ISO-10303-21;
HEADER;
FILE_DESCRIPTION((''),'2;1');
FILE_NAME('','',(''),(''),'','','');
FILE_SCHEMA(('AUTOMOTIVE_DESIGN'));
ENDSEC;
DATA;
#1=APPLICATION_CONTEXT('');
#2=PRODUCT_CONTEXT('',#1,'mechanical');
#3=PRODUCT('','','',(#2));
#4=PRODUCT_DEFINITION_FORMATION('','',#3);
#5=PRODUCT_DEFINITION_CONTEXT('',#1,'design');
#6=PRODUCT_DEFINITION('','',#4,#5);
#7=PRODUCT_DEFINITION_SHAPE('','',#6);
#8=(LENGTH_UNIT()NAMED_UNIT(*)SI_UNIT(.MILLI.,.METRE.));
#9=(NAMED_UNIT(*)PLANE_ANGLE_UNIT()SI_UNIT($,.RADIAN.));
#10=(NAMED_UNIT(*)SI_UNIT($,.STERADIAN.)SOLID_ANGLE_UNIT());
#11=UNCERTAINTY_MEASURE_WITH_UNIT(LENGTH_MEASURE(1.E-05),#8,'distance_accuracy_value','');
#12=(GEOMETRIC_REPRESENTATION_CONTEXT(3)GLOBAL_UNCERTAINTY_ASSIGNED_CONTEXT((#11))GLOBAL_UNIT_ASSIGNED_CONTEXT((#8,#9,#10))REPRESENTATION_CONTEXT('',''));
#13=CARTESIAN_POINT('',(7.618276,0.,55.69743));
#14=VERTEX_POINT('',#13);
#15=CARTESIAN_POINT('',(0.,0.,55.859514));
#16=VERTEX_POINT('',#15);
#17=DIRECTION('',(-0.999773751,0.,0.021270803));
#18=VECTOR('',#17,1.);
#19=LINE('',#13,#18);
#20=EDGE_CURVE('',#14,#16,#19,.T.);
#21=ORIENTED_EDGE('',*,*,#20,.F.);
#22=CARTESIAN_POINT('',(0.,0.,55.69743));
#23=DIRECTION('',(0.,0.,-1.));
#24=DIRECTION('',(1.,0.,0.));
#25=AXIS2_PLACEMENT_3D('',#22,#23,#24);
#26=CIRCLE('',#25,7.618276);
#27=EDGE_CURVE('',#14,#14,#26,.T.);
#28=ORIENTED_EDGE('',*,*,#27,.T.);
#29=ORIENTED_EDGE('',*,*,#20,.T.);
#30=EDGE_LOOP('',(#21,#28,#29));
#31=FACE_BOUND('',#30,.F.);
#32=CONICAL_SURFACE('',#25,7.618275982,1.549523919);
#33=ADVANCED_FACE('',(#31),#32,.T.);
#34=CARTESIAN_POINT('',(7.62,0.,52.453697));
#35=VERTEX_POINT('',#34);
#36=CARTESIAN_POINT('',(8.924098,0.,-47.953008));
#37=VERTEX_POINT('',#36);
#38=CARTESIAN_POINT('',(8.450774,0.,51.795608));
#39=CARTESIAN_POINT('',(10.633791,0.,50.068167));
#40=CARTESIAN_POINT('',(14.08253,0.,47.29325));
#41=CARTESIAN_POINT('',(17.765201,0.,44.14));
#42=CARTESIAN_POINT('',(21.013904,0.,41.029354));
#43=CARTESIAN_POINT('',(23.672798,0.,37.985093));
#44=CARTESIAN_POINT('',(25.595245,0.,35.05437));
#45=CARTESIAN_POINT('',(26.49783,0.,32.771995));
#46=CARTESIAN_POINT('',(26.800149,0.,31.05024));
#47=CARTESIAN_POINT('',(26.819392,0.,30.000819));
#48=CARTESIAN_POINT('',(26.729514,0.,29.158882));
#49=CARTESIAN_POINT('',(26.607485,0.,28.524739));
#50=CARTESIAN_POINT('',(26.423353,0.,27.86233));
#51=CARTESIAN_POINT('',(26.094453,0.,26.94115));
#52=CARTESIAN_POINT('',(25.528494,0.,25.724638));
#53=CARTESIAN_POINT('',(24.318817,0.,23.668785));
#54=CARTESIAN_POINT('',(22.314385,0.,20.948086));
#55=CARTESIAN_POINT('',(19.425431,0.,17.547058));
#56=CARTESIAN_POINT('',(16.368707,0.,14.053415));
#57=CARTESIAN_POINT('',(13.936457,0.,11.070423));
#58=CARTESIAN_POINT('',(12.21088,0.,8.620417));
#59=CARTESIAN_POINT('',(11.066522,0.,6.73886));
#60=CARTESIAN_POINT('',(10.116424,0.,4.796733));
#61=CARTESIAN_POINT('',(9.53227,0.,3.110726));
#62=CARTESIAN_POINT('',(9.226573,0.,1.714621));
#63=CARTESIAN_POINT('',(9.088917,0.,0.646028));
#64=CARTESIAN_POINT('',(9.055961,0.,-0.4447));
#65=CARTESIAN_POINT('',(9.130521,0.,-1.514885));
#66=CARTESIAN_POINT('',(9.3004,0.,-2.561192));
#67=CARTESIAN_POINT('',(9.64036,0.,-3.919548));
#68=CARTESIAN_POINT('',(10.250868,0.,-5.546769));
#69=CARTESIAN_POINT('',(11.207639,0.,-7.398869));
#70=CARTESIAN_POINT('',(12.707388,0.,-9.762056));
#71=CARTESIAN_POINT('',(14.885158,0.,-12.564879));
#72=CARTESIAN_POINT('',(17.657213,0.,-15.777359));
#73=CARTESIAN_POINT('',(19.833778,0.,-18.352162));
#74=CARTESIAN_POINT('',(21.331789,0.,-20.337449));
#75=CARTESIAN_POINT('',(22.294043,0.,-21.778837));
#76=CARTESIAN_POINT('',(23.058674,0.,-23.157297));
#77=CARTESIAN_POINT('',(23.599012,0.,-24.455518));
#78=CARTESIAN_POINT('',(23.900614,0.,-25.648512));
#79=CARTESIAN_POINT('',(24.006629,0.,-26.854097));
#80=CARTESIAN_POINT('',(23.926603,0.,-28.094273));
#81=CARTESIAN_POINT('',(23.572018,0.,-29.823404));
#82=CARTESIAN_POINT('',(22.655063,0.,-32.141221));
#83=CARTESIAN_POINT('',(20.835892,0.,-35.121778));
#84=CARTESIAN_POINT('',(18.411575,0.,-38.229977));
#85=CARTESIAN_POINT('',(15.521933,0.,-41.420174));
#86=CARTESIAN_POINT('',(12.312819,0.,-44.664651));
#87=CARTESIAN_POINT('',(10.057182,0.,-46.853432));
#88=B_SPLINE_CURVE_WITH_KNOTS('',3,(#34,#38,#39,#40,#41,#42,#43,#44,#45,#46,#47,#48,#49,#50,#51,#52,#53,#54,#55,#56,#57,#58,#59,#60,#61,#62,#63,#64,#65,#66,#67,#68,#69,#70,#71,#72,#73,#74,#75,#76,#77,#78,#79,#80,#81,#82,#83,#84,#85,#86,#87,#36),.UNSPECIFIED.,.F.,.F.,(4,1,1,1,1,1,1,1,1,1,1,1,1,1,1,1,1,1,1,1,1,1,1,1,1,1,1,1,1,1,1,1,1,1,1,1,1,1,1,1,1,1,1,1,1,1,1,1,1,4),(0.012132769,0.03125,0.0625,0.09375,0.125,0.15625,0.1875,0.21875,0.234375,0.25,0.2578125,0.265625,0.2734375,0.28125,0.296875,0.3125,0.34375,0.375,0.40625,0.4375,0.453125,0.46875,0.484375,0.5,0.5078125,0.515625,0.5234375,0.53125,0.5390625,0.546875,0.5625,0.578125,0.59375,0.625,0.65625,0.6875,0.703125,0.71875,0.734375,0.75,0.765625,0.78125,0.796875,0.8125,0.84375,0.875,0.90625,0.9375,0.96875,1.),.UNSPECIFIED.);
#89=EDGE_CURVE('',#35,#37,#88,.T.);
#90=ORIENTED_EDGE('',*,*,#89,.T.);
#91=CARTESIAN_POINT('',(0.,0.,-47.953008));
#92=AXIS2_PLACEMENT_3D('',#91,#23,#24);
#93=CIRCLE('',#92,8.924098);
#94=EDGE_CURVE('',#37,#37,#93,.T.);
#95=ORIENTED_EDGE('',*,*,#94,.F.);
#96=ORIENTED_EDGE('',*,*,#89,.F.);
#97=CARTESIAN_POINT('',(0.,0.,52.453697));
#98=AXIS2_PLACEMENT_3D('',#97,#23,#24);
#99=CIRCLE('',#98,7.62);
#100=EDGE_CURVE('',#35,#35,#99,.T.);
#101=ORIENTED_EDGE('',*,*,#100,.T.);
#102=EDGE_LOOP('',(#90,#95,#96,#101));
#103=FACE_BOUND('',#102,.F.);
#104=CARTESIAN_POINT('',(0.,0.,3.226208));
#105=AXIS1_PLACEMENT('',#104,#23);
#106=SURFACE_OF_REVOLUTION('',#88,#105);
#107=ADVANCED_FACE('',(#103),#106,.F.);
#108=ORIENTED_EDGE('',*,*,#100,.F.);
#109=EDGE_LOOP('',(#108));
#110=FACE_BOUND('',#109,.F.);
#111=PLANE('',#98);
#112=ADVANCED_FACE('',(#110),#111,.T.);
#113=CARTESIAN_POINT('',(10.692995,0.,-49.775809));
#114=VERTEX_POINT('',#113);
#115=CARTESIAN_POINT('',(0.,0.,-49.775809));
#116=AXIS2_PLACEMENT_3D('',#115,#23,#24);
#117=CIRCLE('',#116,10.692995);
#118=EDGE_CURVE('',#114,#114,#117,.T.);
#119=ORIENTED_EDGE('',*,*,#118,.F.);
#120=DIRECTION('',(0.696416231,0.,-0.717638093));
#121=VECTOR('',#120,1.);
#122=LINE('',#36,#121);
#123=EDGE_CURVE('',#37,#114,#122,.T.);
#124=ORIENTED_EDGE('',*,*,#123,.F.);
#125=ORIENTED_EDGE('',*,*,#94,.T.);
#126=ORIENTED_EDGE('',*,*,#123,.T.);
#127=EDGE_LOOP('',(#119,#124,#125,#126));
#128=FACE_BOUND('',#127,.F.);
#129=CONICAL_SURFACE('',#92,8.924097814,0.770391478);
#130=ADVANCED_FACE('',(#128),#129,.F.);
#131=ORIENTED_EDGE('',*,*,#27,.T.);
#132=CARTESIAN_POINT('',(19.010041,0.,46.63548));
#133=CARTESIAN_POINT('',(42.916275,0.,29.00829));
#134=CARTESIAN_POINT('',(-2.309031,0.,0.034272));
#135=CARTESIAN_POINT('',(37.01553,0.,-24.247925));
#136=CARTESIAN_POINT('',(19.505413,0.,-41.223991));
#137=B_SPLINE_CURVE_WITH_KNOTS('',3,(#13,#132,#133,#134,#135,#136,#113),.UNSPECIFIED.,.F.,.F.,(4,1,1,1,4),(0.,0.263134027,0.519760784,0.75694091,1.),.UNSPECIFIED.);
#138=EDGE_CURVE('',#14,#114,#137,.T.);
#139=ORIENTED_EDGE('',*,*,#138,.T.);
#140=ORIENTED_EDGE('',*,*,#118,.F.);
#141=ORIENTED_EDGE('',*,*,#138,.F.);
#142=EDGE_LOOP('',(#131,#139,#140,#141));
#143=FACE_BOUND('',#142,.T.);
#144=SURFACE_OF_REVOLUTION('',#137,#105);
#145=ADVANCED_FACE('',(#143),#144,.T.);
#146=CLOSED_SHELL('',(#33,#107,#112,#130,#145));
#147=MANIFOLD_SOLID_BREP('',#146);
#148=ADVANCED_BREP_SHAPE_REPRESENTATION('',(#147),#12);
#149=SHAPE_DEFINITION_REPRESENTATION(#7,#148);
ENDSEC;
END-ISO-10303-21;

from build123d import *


# Not quite as in the source:
# - ends of sketch curves that miss each other by under 0.0002 mm in the source are joined
# - the dataset's text gives a spline's control points without its knots; the knots are read off the source's solid


with BuildPart() as f1:
    # F0 (on Front) → F1 (revolve)
    with BuildSketch(Plane.XZ):
        with BuildLine():
            Line((7.6182759816, 55.6974300589), (0, 55.8595135808))
            Line((0, 55.8595135808), (0, 52.4536972299))
            Line((0, 52.4536972299), (7.62, 52.4536972299))
            add(Edge.make_bspline(
                [(7.62, 52.4536972299), (8.4507741087, 51.7956075294), (10.6337911661, 50.0681673134), (14.0825299324, 47.2932496396), (17.7652011986, 44.139999809), (21.0139039479, 41.0293537983), (23.6727982156, 37.9850926484), (25.5952452636, 35.0543698089), (26.4978301822, 32.7719949731), (26.8001488213, 31.0502395533), (26.8193923693, 30.0008185238), (26.7295144932, 29.1588823674), (26.6074846335, 28.5247393458), (26.4233534744, 27.862329589), (26.0944531371, 26.9411497618), (25.528493763, 25.7246379164), (24.3188174109, 23.6687849146), (22.3143846414, 20.9480860054), (19.4254308568, 17.5470578663), (16.3687065974, 14.053414736), (13.9364574975, 11.0704228027), (12.2108797946, 8.6204173077), (11.0665218373, 6.7388599172), (10.1164243847, 4.7967330249), (9.5322697793, 3.1107263225), (9.2265726183, 1.714621277), (9.0889169388, 0.6460277237), (9.0559612523, -0.4446998408), (9.1305212863, -1.5148849791), (9.3003995532, -2.5611915369), (9.6403598774, -3.9195478282), (10.2508680098, -5.5467690428), (11.2076392915, -7.3988694604), (12.7073875743, -9.7620555753), (14.8851581339, -12.5648794621), (17.6572125501, -15.7773591275), (19.8337778082, -18.3521615832), (21.3317892611, -20.3374489686), (22.2940430686, -21.7788365909), (23.0586742875, -23.1572969124), (23.5990124042, -24.4555180702), (23.9006142985, -25.648512193), (24.0066287573, -26.8540972979), (23.9266033282, -28.0942726556), (23.5720177325, -29.8234035474), (22.655062987, -32.1412209964), (20.8358920917, -35.1217784732), (18.4115749368, -38.229977045), (15.5219332262, -41.4201740782), (12.312819371, -44.6646511445), (10.05718155, -46.8534319006), (8.9240978136, -47.9530082934)],
                knots=[0.0121327687, 0.0121327687, 0.0121327687, 0.0121327687, 0.03125, 0.0625, 0.09375, 0.125, 0.15625, 0.1875, 0.21875, 0.234375, 0.25, 0.2578125, 0.265625, 0.2734375, 0.28125, 0.296875, 0.3125, 0.34375, 0.375, 0.40625, 0.4375, 0.453125, 0.46875, 0.484375, 0.5, 0.5078125, 0.515625, 0.5234375, 0.53125, 0.5390625, 0.546875, 0.5625, 0.578125, 0.59375, 0.625, 0.65625, 0.6875, 0.703125, 0.71875, 0.734375, 0.75, 0.765625, 0.78125, 0.796875, 0.8125, 0.84375, 0.875, 0.90625, 0.9375, 0.96875, 1, 1, 1, 1], degree=3))
            Line((8.9240978136, -47.9530082934), (10.6929950416, -49.7758090496))
            add(Edge.make_bspline(
                [(7.6182759816, 55.6974300589), (19.0100411119, 46.6354798415), (42.9162754464, 29.0082902302), (-2.3090310079, 0.0342724215), (37.0155304225, -24.2479251585), (19.5054127389, -41.2239905455), (10.6929950416, -49.7758090496)],
                knots=[0, 0, 0, 0, 0.2631340266, 0.519760784, 0.7569409104, 1, 1, 1, 1], degree=3))
        make_face()
    revolve(axis=Axis((0, 0, 3.2262075692), (0, 0, -1)))


solid = f1.part
